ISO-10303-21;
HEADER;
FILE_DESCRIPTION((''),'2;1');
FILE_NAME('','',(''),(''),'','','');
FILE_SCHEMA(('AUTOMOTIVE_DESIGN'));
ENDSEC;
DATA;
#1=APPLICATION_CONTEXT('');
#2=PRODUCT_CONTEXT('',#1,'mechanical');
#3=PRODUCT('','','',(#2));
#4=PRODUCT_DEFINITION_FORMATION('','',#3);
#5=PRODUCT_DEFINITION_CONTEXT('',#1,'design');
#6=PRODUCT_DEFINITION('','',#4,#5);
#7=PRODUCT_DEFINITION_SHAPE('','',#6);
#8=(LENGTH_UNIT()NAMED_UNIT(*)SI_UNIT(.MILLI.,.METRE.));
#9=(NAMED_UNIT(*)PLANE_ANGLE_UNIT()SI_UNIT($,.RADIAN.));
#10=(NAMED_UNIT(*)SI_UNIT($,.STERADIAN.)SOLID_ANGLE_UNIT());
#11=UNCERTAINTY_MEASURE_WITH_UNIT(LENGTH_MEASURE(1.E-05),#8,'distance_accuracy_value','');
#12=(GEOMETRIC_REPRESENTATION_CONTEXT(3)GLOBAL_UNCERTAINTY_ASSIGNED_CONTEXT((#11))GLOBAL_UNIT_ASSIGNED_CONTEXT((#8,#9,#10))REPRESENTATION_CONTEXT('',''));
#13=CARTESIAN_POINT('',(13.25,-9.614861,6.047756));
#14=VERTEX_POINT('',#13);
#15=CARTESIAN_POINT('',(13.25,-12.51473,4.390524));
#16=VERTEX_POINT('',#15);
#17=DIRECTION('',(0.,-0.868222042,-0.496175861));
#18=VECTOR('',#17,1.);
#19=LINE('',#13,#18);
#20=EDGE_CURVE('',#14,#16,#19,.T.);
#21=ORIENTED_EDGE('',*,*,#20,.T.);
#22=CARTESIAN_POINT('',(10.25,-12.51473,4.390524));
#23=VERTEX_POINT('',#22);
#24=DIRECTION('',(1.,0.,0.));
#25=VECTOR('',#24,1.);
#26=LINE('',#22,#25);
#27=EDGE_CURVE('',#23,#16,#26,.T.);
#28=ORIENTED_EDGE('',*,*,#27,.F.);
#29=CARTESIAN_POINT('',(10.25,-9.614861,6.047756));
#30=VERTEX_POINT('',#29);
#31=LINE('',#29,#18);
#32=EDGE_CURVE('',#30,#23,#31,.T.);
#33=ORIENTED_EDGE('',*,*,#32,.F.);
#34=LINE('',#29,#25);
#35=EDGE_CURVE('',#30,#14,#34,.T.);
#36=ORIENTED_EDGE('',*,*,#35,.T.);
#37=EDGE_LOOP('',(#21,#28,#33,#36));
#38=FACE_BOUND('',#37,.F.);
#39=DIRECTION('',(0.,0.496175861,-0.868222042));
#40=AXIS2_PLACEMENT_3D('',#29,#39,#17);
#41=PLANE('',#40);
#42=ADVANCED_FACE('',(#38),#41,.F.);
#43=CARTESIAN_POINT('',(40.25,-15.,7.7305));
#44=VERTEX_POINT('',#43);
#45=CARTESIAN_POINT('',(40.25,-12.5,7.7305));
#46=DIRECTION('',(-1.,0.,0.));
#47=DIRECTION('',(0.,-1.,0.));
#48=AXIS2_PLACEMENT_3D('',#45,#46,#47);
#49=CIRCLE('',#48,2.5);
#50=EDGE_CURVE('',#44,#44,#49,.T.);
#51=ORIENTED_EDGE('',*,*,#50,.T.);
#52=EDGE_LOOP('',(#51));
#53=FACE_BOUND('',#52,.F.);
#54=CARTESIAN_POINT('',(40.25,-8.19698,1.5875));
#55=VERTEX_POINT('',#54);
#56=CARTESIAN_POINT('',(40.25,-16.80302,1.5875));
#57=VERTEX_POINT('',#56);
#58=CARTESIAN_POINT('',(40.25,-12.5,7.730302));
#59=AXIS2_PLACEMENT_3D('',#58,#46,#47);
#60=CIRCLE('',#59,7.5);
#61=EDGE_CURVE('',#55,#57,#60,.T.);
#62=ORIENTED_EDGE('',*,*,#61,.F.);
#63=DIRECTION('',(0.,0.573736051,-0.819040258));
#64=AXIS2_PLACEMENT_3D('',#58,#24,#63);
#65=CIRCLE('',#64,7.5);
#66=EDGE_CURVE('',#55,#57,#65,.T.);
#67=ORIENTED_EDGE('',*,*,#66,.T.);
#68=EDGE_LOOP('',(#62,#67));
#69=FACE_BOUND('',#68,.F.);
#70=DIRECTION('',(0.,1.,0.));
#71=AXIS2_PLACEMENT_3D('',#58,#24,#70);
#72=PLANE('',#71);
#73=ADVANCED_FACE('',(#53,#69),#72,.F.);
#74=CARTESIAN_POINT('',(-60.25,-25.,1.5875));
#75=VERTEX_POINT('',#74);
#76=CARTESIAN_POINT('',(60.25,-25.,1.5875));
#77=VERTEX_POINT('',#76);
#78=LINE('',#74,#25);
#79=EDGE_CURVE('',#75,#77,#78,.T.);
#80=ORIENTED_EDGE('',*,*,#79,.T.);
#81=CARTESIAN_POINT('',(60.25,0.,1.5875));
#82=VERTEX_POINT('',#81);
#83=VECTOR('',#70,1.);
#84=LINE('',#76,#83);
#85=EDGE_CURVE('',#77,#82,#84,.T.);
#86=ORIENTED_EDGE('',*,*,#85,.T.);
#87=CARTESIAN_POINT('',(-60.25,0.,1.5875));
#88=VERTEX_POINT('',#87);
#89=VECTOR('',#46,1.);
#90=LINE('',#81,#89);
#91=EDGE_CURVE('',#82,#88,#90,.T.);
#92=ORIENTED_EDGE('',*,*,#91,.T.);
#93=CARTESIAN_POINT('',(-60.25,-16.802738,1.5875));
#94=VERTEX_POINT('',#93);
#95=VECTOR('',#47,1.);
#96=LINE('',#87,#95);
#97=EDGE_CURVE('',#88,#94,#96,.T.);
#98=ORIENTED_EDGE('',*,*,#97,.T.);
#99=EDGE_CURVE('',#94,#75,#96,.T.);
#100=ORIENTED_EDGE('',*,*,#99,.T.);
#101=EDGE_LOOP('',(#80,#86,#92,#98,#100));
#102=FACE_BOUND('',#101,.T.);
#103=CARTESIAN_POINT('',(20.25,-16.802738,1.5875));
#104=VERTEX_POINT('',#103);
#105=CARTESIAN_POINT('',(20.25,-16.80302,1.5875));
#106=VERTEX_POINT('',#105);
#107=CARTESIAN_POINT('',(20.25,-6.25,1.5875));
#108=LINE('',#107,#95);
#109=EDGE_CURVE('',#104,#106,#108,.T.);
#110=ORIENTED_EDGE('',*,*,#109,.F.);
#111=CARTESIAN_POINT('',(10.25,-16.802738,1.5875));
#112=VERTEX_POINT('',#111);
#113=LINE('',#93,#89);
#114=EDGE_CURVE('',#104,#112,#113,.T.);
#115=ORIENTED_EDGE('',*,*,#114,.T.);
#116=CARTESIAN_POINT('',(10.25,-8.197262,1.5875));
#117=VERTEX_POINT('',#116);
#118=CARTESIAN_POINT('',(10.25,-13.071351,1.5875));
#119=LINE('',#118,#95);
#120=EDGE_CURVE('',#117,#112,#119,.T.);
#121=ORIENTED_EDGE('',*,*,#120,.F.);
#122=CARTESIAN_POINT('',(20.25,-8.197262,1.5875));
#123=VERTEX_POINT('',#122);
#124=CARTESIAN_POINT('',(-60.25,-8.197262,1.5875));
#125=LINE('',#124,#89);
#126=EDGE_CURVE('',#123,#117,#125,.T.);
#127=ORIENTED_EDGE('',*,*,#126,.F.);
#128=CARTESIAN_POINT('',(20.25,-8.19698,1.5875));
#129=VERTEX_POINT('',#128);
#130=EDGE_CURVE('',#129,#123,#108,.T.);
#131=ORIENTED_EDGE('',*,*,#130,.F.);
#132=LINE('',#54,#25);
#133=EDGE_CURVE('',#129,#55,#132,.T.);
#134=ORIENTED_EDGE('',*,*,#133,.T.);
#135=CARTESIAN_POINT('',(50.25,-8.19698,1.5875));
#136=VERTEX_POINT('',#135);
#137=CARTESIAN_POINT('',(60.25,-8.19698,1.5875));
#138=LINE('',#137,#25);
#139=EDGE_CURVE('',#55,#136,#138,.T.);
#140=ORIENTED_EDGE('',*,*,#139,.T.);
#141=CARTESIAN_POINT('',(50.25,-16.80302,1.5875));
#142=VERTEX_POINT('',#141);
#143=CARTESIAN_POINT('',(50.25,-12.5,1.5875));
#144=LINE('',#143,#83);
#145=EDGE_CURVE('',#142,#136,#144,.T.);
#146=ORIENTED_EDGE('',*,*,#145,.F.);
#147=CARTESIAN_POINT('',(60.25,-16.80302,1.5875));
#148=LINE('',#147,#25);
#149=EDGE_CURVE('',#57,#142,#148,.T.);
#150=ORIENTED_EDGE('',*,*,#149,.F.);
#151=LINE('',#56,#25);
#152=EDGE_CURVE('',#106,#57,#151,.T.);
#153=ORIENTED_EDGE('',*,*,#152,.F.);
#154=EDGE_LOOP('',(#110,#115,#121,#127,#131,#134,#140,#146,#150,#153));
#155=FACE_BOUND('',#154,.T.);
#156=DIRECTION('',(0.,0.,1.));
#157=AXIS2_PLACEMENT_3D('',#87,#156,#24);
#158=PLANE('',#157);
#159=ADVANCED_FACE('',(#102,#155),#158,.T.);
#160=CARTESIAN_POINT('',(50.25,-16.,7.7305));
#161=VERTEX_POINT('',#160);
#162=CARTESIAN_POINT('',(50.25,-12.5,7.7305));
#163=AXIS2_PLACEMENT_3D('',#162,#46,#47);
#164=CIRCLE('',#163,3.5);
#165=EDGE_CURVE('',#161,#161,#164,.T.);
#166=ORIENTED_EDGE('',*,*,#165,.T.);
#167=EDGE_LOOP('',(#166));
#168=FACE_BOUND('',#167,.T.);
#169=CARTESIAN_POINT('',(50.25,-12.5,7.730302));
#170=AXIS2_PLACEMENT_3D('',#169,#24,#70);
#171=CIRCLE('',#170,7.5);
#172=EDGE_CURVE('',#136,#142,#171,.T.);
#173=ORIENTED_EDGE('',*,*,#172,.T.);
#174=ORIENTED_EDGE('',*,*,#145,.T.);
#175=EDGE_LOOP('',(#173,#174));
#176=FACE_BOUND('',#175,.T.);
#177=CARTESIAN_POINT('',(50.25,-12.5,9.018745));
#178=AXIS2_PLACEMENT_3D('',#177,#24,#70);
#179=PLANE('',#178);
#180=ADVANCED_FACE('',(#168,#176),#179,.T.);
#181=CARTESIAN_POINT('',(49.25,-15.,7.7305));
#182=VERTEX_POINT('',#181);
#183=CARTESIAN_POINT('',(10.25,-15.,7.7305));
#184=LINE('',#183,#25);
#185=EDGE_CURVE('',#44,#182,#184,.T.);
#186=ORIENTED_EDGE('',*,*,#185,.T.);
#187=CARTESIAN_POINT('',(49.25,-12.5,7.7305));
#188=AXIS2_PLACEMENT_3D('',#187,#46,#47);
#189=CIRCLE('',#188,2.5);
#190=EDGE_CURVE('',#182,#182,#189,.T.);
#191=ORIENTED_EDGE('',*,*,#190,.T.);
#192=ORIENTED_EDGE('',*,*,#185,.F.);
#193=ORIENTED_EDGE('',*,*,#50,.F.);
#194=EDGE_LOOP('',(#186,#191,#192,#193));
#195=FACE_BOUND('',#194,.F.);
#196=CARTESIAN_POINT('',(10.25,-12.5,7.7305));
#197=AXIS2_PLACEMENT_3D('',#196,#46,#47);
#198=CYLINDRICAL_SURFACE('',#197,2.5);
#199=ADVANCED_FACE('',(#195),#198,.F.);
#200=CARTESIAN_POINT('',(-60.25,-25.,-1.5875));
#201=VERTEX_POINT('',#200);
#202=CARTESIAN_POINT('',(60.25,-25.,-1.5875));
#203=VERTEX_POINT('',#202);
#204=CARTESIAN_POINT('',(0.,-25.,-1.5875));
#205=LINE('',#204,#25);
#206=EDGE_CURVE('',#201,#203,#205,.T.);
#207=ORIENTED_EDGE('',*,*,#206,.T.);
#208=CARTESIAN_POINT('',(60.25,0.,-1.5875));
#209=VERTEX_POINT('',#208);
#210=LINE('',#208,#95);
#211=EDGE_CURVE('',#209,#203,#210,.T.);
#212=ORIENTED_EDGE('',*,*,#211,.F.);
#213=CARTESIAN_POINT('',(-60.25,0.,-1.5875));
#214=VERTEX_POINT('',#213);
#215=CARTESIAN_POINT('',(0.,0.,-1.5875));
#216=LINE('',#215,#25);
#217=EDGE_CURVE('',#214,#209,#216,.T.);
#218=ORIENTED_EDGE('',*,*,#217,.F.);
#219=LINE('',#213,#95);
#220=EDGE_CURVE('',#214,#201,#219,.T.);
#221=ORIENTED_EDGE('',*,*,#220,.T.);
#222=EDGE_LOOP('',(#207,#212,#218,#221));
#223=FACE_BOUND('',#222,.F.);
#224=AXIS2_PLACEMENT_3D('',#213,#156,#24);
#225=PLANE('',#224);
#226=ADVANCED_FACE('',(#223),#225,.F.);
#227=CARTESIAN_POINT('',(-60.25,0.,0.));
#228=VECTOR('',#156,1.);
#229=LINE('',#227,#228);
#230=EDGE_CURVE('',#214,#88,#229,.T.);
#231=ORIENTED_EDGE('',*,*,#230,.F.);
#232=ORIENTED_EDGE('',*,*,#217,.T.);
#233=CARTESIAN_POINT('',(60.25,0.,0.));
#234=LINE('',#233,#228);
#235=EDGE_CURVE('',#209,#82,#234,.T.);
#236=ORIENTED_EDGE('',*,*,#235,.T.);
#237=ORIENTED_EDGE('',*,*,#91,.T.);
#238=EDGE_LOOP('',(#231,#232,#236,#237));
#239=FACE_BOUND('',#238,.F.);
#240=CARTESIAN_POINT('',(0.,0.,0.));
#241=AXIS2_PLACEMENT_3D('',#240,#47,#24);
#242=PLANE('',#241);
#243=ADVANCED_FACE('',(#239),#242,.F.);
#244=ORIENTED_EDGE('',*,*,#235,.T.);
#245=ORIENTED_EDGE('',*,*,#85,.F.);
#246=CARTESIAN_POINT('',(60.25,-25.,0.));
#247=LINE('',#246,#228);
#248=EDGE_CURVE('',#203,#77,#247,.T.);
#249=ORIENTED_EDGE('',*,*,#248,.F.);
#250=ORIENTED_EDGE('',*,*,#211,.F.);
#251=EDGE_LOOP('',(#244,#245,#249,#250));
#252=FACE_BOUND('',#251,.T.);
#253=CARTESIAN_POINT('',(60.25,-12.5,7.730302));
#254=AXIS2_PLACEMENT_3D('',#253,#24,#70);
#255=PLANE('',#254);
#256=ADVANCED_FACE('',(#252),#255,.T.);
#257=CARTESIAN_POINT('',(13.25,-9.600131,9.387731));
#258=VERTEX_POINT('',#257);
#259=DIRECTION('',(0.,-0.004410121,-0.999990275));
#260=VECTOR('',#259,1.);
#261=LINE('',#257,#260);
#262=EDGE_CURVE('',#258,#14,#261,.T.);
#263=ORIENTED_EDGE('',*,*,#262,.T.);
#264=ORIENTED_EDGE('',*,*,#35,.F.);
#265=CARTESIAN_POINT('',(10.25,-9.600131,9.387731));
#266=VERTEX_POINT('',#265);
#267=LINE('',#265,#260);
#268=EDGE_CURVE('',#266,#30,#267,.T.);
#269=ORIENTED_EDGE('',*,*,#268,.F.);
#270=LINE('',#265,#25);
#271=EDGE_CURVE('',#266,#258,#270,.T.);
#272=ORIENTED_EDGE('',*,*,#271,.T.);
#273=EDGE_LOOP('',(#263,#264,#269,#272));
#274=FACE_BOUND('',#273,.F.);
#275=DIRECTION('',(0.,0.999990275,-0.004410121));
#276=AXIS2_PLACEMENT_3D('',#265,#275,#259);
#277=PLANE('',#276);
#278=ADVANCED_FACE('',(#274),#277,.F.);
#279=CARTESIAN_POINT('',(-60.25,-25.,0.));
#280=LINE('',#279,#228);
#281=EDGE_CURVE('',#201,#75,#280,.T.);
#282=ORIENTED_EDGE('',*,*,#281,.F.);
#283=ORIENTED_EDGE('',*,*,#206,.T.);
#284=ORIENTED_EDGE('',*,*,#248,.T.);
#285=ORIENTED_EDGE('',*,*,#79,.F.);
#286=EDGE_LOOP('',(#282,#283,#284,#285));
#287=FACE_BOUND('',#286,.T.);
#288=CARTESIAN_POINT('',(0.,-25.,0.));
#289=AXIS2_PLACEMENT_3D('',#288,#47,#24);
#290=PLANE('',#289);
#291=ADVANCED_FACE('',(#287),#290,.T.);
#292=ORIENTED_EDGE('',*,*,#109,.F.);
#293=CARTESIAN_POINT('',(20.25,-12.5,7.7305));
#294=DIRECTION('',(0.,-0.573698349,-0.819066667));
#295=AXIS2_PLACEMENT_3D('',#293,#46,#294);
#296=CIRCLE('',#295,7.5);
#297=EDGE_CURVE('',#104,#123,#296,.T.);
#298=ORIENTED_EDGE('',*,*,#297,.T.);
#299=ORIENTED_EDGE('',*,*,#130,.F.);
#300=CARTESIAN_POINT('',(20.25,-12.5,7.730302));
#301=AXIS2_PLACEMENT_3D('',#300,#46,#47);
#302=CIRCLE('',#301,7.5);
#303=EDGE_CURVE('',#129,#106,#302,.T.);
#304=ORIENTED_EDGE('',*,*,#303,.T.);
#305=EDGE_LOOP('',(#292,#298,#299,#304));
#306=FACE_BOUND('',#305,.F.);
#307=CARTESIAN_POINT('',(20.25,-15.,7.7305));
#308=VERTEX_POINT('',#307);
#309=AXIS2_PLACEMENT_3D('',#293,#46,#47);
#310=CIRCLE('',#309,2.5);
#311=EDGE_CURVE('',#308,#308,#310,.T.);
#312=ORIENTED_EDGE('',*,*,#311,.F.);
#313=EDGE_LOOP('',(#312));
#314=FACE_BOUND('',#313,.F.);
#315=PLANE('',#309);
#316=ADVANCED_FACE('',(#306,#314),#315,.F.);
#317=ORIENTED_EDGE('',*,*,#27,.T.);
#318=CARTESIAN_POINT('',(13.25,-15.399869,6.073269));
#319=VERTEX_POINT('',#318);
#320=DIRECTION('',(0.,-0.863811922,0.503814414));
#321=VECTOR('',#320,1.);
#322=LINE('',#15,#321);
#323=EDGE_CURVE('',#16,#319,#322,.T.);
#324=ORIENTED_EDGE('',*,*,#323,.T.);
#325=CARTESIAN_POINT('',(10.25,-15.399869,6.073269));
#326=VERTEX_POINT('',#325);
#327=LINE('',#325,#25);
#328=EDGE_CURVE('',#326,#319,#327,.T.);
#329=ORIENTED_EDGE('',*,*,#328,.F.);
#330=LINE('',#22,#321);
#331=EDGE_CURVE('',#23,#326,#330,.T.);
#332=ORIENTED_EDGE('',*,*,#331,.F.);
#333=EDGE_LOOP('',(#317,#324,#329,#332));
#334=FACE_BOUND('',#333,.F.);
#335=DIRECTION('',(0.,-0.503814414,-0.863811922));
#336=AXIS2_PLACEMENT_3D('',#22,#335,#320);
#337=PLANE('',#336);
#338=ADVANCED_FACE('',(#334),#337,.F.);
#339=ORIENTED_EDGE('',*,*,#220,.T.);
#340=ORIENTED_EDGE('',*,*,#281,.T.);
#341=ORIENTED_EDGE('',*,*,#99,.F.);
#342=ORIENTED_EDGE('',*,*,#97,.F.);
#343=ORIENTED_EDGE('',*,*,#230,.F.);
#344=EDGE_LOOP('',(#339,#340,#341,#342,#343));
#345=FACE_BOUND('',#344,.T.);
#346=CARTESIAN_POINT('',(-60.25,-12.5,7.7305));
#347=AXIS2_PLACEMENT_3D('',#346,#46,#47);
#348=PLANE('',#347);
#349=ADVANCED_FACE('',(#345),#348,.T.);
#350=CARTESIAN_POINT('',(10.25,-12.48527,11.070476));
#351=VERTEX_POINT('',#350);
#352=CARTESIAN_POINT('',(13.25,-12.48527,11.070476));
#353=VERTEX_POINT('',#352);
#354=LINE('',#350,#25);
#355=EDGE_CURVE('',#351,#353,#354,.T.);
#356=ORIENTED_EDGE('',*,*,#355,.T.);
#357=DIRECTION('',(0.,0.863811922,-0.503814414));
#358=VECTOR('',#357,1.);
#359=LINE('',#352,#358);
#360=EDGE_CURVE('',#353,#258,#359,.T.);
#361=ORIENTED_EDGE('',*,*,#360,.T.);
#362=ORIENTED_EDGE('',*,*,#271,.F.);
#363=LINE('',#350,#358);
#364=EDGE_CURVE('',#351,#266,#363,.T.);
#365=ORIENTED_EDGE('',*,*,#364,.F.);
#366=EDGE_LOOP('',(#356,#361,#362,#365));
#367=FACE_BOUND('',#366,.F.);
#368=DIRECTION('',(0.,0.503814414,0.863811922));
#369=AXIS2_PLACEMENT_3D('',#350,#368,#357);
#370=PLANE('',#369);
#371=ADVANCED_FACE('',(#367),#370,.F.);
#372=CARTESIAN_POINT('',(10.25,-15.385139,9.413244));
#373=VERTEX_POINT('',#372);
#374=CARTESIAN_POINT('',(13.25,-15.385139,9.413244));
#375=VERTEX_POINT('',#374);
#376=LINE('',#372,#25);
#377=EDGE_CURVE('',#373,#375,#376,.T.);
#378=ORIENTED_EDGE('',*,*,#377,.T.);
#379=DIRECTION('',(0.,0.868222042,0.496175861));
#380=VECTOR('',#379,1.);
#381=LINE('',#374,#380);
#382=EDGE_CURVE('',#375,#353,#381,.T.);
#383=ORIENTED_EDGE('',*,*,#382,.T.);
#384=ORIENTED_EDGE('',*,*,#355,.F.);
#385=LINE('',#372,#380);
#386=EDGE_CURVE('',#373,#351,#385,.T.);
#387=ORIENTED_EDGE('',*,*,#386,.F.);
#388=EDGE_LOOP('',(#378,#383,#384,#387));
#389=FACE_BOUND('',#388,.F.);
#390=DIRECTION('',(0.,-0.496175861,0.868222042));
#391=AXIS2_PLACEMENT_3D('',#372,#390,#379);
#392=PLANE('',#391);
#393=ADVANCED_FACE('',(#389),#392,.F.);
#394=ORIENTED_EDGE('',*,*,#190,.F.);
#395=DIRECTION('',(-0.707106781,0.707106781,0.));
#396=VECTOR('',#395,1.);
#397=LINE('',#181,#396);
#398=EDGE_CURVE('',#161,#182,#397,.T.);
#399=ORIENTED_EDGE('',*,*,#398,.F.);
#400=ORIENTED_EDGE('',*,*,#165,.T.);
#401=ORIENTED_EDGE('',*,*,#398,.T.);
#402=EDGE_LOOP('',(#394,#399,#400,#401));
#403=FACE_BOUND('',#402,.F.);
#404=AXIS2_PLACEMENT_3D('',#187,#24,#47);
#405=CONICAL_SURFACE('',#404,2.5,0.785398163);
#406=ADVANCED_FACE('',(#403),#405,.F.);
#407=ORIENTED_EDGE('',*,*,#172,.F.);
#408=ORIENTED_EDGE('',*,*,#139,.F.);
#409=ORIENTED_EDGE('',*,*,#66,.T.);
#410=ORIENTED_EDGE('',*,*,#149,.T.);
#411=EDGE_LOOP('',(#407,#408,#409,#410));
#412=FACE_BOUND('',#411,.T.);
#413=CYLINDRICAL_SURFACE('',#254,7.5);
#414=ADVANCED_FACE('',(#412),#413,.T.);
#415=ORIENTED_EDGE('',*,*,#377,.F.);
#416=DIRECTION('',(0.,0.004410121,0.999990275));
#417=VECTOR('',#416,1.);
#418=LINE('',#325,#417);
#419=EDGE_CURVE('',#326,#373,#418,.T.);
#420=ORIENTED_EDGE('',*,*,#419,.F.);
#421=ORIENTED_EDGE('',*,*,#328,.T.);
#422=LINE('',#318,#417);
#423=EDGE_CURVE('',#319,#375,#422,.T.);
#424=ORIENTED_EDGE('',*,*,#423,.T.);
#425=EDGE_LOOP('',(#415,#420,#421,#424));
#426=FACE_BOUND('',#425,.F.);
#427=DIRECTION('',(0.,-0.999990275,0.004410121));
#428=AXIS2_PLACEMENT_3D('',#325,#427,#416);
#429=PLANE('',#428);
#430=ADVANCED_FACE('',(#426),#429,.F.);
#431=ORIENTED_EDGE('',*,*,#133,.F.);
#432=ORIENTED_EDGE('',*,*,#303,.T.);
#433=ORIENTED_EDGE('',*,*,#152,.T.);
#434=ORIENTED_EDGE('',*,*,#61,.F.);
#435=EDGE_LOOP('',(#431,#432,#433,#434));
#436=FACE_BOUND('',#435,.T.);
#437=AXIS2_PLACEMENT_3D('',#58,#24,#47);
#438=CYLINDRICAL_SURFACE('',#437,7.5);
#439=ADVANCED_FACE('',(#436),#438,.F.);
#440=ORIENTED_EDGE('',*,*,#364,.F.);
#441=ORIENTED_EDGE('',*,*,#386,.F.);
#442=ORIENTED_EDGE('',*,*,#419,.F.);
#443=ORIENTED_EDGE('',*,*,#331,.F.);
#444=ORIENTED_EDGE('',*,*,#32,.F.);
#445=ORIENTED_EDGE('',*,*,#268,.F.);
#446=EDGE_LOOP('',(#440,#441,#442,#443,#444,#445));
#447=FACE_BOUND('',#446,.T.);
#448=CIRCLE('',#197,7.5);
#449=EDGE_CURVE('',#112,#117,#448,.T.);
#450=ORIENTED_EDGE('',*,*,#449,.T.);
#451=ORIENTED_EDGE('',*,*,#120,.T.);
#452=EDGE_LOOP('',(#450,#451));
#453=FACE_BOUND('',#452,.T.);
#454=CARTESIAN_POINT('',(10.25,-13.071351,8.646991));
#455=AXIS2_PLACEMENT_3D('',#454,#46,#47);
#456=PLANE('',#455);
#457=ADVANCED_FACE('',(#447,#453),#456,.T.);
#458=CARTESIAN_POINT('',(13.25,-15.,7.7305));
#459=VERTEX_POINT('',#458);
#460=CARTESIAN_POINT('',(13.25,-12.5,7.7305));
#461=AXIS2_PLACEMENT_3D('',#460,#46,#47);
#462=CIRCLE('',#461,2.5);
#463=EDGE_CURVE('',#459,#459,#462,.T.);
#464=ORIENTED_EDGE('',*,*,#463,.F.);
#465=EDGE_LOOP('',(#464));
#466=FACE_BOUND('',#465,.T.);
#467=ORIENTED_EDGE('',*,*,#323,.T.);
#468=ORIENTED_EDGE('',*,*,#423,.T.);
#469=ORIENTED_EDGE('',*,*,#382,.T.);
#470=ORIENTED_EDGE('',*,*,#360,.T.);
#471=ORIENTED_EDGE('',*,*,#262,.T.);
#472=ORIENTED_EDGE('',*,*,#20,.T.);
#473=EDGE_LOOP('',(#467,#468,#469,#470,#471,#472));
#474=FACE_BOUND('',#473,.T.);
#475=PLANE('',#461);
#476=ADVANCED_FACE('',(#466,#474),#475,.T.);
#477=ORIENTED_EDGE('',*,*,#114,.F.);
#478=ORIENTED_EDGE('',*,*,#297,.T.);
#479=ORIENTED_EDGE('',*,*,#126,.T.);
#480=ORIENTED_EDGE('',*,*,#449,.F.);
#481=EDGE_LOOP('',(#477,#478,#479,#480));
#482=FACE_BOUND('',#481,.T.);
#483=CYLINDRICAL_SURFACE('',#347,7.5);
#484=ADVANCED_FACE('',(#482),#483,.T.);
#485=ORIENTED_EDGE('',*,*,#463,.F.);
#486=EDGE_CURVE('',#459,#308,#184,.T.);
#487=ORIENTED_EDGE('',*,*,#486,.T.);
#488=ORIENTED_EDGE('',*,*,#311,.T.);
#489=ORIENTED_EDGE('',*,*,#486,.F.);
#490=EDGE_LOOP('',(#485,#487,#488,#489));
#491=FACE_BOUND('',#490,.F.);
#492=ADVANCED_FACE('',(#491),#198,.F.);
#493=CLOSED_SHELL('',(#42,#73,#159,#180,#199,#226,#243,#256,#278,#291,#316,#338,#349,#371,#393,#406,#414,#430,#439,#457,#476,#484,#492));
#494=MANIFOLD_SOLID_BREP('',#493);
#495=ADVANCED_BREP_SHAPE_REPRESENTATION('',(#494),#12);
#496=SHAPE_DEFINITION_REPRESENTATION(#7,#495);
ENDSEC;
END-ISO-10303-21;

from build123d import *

# Parameters (mm, degrees)
F0_W      = 120.5
F0_H      = 3.175
F1_DEPTH  = 25
F2_R      = 7.5
F3_DEPTH  = 20
F4_R      = 7.5
F5_DEPTH  = 20
F6_R      = 7.5
F7_DEPTH  = 80.5
F8_W      = 26.1427015066
F8_H      = 14.1189814121
F9_DEPTH  = 70.5
F10_W     = 25
F10_H     = 14.862489751
F11_DEPTH = 10
F12_R     = 2.5
F13_DEPTH = 80
F15_DEPTH = 3
F16_SIZE  = 1


# Not quite as in the source:
# - a feature names something its author has since deleted; it is built from what else it names


with BuildPart() as f1:
    # F0 (on Front) → F1 (new body)
    with BuildSketch(Plane.XZ):
        Rectangle(F0_W, F0_H)
    extrude(amount=F1_DEPTH)

    # F2 (on face) → F3 (join)
    with BuildSketch(Plane.YZ.offset(60.25)):
        with Locations((-12.5, 7.7303019352)):
            Circle(F2_R)
    extrude(amount=-F3_DEPTH)

    # F4 (on face) → F5 (cut)
    with BuildSketch(Plane(origin=(40.25, 0, 0), x_dir=(0, -1, 0), z_dir=(-1, 0, 0))):
        with Locations((12.5, 7.7303019352)):
            Circle(F4_R)
    extrude(amount=F5_DEPTH, mode=Mode.SUBTRACT)

    # F6 (on face) → F7 (join)
    with BuildSketch(Plane(origin=(-60.25, 0, 0), x_dir=(0, -1, 0), z_dir=(-1, 0, 0))):
        with Locations((12.5, 7.7305)):
            Circle(F6_R)
    extrude(amount=-F7_DEPTH)

    # F8 (on face) → F9 (cut)
    with BuildSketch(Plane(origin=(-60.25, 0, 0), x_dir=(0, -1, 0), z_dir=(-1, 0, 0))):
        with Locations((13.0713507533, 8.646990706)):
            Rectangle(F8_W, F8_H)
    extrude(amount=-F9_DEPTH, mode=Mode.SUBTRACT)

    # F10 (on face) → F11 (cut)
    with BuildSketch(Plane.YZ.offset(60.25)):
        with Locations((-12.5, 9.0187448755)):
            Rectangle(F10_W, F10_H)
    extrude(amount=-F11_DEPTH, mode=Mode.SUBTRACT)

    # F12 (on face) → F13 (cut)
    with BuildSketch(Plane(origin=(10.25, 0, 0), x_dir=(0, -1, 0), z_dir=(-1, 0, 0))):
        with Locations((12.5, 7.7305)):
            Circle(F12_R)
    extrude(amount=-F13_DEPTH, mode=Mode.SUBTRACT)

    # F14 (on face) → F15 (cut)
    with BuildSketch(Plane(origin=(10.25, 0, 0), x_dir=(0, -1, 0), z_dir=(-1, 0, 0))):
        Polygon((12.5147298399, 4.3905242768), (15.3998687443, 6.0732685539), (15.3851389044, 9.4132442772), (12.4852701601, 11.0704757232), (9.6001312557, 9.3877314461), (9.6148610956, 6.0477557228), align=None)
    extrude(amount=-F15_DEPTH, mode=Mode.SUBTRACT)

    # F16
    f16_edges = [f1.edges().sort_by_distance(p)[0] for p in [
        (50.25, -10, 7.7305),
    ]]
    chamfer(f16_edges, length=F16_SIZE)


solid = f1.part
